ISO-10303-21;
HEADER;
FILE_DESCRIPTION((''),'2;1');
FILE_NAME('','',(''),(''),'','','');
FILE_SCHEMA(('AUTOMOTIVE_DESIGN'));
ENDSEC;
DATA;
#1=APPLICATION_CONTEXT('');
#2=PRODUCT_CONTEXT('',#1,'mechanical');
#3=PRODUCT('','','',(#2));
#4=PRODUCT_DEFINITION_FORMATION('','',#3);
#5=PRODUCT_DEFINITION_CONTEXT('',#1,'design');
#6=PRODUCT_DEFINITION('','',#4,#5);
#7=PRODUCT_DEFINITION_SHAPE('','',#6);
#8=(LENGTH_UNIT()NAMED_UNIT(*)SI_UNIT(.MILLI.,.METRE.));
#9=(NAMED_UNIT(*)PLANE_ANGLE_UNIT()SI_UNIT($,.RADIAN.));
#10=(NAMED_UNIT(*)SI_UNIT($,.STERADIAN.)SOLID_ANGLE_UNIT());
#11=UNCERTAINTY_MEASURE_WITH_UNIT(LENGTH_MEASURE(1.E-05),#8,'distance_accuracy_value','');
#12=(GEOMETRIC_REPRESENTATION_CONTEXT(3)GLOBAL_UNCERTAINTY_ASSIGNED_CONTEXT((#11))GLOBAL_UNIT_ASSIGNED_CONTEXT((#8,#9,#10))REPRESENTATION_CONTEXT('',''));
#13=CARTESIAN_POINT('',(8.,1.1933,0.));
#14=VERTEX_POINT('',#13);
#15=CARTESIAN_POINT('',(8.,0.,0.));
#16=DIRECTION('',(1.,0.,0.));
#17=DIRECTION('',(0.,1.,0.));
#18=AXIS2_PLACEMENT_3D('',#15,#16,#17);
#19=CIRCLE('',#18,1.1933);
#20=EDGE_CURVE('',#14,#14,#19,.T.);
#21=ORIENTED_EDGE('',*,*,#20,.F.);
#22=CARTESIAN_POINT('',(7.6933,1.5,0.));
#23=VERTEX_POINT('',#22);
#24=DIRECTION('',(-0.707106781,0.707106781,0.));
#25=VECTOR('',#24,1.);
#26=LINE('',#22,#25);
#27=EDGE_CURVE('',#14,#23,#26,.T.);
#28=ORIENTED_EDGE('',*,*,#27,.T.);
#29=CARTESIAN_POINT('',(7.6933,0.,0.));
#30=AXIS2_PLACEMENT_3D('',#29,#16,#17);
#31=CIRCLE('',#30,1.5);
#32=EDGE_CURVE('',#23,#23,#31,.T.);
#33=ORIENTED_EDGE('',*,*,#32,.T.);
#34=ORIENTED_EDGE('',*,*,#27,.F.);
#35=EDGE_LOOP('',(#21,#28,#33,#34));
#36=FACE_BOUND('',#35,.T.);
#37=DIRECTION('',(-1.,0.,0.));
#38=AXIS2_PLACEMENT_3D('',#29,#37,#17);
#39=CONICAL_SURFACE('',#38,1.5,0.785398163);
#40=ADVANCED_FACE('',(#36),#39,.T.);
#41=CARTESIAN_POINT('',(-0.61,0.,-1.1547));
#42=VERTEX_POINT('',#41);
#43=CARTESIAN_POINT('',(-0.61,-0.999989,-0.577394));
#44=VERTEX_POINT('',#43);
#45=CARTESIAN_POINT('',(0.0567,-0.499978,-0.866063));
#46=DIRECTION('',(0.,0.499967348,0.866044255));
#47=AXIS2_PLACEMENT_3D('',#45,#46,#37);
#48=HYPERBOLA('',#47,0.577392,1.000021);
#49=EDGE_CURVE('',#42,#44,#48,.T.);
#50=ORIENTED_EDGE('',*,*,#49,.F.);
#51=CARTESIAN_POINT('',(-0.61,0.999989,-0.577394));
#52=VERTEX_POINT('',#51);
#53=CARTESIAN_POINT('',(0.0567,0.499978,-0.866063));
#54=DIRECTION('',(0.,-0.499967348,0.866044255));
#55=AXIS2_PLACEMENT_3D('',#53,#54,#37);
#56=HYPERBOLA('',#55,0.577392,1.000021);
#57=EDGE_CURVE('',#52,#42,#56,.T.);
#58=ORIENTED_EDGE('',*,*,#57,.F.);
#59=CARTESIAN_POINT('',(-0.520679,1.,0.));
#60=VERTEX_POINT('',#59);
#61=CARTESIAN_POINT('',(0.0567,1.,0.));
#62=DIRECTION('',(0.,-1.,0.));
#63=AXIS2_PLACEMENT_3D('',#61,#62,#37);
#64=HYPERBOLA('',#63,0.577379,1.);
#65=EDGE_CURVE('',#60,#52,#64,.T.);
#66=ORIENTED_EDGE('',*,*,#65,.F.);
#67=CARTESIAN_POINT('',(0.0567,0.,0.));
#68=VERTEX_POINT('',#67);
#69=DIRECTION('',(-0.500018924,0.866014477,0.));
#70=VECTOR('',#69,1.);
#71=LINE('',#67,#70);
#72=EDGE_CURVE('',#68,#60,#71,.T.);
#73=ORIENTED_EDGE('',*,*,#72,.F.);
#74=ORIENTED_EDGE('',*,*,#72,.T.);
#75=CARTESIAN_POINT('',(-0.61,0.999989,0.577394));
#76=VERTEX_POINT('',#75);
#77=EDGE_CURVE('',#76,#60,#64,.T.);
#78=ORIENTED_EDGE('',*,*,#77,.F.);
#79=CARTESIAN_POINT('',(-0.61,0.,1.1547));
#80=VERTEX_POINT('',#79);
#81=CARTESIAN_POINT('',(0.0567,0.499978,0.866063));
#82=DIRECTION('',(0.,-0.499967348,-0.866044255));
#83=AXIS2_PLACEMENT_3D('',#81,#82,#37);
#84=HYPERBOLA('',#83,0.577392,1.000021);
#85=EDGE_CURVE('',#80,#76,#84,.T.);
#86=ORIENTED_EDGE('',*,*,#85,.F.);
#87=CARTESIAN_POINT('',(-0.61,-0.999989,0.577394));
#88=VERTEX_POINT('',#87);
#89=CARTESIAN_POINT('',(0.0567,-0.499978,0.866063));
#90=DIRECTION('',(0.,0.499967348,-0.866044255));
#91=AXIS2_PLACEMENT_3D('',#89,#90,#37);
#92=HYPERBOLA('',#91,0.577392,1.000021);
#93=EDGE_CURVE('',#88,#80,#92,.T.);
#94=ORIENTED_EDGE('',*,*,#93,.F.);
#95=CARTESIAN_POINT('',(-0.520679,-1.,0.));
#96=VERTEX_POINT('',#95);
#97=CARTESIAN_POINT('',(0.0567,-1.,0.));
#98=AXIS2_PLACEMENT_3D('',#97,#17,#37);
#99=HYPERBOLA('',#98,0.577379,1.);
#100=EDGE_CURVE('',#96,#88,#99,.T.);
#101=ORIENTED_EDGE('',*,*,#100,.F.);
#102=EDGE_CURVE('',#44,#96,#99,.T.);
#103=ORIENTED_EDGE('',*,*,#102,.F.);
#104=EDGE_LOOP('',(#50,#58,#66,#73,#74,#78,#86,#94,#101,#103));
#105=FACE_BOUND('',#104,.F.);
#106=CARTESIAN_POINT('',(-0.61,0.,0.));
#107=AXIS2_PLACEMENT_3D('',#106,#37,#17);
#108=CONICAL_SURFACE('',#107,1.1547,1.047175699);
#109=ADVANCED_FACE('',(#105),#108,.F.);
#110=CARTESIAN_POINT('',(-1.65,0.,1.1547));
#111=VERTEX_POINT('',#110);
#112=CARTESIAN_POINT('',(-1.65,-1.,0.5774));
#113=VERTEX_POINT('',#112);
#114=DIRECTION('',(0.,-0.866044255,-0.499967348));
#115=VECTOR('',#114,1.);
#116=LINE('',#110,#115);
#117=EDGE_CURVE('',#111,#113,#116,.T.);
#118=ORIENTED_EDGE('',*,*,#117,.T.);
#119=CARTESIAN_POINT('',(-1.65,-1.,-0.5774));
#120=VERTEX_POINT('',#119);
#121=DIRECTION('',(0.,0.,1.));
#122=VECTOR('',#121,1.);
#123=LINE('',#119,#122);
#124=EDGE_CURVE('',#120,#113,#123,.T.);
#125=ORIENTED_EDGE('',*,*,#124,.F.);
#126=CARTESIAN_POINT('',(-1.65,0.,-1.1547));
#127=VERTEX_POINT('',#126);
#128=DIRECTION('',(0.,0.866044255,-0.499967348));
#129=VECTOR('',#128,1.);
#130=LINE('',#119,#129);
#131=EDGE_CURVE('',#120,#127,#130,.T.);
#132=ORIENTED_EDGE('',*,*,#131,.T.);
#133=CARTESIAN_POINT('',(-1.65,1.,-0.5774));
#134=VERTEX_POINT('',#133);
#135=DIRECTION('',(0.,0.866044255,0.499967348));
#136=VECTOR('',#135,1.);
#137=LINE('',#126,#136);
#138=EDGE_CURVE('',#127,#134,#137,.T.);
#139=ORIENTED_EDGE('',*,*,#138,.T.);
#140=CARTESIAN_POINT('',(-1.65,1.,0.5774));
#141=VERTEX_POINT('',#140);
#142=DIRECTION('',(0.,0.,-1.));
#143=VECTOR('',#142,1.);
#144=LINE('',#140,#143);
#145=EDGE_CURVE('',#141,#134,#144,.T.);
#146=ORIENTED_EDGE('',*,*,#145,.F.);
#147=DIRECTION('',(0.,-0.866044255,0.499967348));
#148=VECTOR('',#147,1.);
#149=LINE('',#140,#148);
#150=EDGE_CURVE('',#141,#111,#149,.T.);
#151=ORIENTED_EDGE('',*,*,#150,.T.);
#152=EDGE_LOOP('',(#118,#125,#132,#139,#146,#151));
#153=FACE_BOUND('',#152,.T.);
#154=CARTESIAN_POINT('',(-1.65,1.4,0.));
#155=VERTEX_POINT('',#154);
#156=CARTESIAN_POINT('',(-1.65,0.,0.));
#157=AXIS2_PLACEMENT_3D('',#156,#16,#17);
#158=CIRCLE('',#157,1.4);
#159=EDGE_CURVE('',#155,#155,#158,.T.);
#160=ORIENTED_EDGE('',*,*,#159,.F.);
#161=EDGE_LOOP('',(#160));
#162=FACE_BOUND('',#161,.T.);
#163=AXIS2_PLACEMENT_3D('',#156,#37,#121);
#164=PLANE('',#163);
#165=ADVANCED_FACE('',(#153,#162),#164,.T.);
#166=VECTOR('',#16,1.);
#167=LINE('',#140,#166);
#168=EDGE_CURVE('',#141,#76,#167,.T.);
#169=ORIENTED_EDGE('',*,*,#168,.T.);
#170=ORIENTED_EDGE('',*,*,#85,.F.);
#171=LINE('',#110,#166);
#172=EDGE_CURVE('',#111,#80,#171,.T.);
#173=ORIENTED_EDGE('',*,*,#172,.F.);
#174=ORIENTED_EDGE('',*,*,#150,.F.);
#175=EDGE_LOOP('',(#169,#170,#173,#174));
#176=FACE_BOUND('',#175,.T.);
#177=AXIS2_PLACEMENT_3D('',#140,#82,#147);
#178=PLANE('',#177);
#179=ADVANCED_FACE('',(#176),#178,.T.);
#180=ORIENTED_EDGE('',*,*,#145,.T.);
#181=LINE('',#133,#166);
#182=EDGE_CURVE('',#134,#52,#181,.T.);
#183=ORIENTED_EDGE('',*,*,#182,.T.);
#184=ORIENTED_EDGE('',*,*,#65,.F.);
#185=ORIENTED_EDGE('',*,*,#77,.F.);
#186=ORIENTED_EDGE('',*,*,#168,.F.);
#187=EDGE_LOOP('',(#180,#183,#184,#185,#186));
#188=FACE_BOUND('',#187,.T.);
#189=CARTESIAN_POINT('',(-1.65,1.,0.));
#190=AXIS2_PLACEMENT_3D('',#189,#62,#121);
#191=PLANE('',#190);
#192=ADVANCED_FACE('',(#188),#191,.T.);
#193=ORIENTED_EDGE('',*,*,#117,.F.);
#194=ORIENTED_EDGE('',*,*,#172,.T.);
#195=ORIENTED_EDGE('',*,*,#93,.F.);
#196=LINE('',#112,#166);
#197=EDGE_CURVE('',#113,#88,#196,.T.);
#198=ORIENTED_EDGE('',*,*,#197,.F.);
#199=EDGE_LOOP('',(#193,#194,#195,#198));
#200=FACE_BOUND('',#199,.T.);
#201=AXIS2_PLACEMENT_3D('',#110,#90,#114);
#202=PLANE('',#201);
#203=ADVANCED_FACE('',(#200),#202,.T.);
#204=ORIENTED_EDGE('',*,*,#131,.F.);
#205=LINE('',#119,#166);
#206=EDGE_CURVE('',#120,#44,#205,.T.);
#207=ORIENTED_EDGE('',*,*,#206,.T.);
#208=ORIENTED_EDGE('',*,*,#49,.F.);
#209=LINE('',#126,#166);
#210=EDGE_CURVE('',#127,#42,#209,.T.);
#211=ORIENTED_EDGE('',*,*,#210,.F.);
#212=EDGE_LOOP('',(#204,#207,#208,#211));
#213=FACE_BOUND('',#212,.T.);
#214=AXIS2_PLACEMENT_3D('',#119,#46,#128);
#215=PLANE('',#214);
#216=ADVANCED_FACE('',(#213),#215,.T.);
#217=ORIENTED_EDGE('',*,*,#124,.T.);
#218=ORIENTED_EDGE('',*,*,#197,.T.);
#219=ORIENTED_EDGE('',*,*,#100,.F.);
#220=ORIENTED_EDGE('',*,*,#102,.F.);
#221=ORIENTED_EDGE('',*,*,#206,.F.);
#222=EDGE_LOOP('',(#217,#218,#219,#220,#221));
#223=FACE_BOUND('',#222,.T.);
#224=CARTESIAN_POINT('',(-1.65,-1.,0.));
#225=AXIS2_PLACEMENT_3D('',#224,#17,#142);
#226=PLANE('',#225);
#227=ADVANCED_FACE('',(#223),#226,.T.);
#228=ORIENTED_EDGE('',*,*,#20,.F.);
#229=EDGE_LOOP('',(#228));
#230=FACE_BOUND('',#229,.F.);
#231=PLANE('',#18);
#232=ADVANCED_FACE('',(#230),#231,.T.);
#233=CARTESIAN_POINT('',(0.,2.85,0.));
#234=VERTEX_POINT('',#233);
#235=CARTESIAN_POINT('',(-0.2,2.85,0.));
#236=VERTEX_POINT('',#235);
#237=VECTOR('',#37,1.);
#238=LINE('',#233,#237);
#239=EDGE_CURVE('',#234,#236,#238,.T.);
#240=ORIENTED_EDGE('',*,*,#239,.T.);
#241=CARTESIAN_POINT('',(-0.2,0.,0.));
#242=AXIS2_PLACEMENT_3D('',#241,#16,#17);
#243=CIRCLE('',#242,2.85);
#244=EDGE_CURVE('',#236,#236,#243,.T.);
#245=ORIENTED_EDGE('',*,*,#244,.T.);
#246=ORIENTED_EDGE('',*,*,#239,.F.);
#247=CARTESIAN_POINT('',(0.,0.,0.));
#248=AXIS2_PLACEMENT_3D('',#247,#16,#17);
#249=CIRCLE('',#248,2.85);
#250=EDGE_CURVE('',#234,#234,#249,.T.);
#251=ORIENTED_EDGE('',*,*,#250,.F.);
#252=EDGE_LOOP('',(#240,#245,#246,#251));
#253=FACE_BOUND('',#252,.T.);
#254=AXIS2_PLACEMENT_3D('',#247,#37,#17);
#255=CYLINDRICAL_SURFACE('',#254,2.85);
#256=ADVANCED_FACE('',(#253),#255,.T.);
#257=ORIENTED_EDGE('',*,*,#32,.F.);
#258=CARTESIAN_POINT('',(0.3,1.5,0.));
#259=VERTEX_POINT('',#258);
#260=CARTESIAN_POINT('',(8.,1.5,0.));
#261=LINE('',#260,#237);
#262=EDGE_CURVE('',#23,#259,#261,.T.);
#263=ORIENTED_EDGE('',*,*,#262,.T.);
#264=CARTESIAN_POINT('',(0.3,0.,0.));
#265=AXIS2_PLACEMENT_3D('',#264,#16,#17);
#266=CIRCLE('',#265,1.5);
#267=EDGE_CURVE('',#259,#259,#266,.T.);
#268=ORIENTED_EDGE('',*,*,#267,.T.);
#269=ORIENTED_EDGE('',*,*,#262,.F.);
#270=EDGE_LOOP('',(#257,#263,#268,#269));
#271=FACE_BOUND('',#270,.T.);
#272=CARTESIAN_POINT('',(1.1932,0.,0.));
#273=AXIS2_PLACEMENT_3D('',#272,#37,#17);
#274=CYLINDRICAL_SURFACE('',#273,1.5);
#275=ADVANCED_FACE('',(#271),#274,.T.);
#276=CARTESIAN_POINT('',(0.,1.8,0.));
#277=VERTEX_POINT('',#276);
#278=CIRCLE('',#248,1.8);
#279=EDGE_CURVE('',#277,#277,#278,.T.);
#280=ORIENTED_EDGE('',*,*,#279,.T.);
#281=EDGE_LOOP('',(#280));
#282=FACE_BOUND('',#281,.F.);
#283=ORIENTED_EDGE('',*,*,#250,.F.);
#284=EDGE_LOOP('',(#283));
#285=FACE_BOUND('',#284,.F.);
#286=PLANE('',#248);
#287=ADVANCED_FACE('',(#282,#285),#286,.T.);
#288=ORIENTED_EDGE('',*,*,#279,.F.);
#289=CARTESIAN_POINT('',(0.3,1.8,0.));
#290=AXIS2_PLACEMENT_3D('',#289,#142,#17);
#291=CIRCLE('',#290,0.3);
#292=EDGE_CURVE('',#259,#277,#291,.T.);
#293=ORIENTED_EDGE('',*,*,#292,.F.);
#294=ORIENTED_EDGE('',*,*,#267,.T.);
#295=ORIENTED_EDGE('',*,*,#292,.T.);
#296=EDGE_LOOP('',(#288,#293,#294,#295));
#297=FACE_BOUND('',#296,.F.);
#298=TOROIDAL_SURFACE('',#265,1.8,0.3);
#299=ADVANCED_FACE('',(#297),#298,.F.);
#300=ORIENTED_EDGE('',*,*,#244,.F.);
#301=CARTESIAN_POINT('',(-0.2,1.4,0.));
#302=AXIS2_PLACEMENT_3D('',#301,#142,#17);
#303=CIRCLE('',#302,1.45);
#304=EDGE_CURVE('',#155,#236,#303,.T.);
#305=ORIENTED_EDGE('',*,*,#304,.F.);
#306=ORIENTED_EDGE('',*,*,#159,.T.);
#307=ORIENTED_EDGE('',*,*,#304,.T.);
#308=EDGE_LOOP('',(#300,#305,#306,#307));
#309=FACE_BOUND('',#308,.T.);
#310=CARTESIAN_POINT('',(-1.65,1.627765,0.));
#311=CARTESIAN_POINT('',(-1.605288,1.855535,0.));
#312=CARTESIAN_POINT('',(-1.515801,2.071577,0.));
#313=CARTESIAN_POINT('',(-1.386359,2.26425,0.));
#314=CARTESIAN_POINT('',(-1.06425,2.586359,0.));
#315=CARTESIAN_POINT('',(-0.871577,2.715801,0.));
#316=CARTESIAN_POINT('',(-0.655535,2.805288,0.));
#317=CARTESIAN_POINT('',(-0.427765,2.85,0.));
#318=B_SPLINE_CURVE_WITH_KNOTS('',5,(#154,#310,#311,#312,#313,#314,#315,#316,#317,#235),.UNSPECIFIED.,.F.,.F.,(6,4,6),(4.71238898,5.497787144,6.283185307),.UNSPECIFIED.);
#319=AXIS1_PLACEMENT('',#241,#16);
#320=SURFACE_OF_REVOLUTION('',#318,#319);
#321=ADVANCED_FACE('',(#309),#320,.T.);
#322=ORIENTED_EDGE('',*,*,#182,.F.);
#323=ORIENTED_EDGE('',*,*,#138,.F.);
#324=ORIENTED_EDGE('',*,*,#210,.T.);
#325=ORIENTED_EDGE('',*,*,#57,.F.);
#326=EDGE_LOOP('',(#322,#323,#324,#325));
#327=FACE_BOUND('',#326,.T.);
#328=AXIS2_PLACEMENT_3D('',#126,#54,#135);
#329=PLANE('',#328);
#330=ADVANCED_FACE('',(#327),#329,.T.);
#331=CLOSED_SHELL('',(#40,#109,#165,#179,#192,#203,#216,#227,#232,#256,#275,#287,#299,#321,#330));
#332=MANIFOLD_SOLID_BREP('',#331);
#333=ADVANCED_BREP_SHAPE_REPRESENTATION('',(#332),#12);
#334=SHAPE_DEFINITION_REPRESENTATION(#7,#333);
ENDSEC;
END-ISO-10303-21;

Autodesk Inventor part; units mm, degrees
ref_plane "YZ Plane" through (0, 0, 0) normal (1, 0, 0) x (0, 1, 0)
ref_plane "XZ Plane" through (0, 0, 0) normal (0, 1, 0) x (-1, 0, 0)
sketch "Sketch1" plane through (0, 0, 0) normal (0, 0, 1) x (1, 0, 0)
  line L0 (0.0567, 0) -> (8, 0)
  line L1 (8, 0) -> (8, 1.5)
  line L2 (8, 1.5) -> (1.5, 1.5)
  line L3 (1.5, 1.5) -> (1.1932, 1.5)
  line L4 (1.1932, 1.5) -> (0, 1.5)
  line L5 (0, 1.5) -> (0, 2.85)
  line L6 (0, 2.85) -> (-1.65, 2.85)
  line L7 (-1.65, 2.85) -> (-1.65, 1.1547)
  line L8 (-1.65, 1.1547) -> (-0.61, 1.1547)
  line L9 (-0.61, 1.1547) -> (0.0567, 0)
  line L10 (-3.58, 0) -> (9.93, 0) projected
  line L11 (0, -0.57) -> (0, 3.42) projected
  line L12 (1.5, 1.5) -> (0, 1.5) construction
  dimension "d1" = 6.5
  dimension "d2" = 0.3068
  dimension "d3" = 1.65
  dimension "d4" = 1.04
  dimension "d5" = 60
  dimension "d6" = 3
  dimension "d7" = 3
  dimension "d8" = 2.3094
  dimension "d9" = 5.7
  dimension "d26" = 8
revolve "Body" add sketch "Sketch1" angle 360 about axis through (0.0567, 0, 0) along (1, 0, 0) contours L9 L11 L4 L3 L2 L1 L0 | L9 L8 L7 L6 L5 L11
sketch "Sketch2" plane through (-1.65, 0, 0) normal (-1, 0, 0) x (0, 0, 1)
  circle A0 centre (0, 0) radius 1.1547 projected
  line L0 (0, -3.99) -> (0, 3.99) projected
  line L1 (-3.99, 0) -> (3.99, 0) projected
  line L2 (1.1547, 0) -> (0.5774, -1)
  line L3 (0.5774, -1) -> (-0.5774, -1)
  line L4 (-0.5774, -1) -> (-1.1547, 0)
  line L5 (-1.1547, 0) -> (-0.5774, 1)
  line L6 (-0.5774, 1) -> (0.5774, 1)
  line L7 (0.5774, 1) -> (1.1547, 0)
extrude "Slot" add sketch "Sketch2" against normal up to next contours L7 A0 | A0 L2 | L6 L0 A0 | A0 L0 L3 | L0 L6 A0 | A0 L3 L0 | L4 A0 | A0 L5
fillet "Fillet1" radius 1.45 1 edges at (-1.65, -2.85, 0)
thread "Thread" size "M3x0.5" class "6g" standard "ISO Metric profile" length 6.5
chamfer "Chamfer1" distance 0.3067 distance2 0.3067 1 edges at (8, -1.5, 0) measured on face at (8, 0.5539, 0.4443)
ref_plane "Work Plane1" through (29, 0, 0) normal (0, -1, 0) x (1, 0, 0)
fillet "Fillet2" radius 0.3 1 edges at (0, -1.5, 0)
equation "\"d30\" = R"
equation "\"d17\" = RR"
equation "\"d13\" = GEL"
equation "\"d15\" = -0.5 * SPD + 0.5 * GD"
equation "\"d16\" = GUL"
equation "\"d1\" = GEL"
equation "\"d3\" = KOH"
equation "\"d4\" = INTI"
equation "\"d6\" = GD"
equation "\"d7\" = BDM"
equation "\"d8\" = 1.1547 * SW"
equation "\"d9\" = KOD"
equation "\"d26\" = NLG"
equation "\"GD\" = NND"
equation "\"NLG\" = 8"
equation "\"GEL\" = 6.5"
equation "\"KOD\" = 5.7"
equation "\"KOH\" = 1.65"
equation "\"INTI\" = 1.04"
equation "\"GAL\" = 0.61345 * PTC"
equation "\"GUL\" = 0.61345 * PTC"
equation "\"BDM\" = NND"
equation "\"SW\" = 2"
equation "\"RR\" = 1.45"
equation "\"SPD\" = NND - 1.2269 * PTC"
equation "\"R\" = 0.3"
equation "\"TOA\" = 30deg"
equation "\"GD1\" = THREADDIA - 1.2269 * PTC"
equation "\"THREADDIA\" = 3"
equation "\"PTC\" = 0.5"
equation "\"NND\" = 3"
equation "\"KOH1\" = 0.2"
equation "\"E0\" = 2.303"
properties part number "ISO 7380-1 - M3 x 8" material "Steel"
